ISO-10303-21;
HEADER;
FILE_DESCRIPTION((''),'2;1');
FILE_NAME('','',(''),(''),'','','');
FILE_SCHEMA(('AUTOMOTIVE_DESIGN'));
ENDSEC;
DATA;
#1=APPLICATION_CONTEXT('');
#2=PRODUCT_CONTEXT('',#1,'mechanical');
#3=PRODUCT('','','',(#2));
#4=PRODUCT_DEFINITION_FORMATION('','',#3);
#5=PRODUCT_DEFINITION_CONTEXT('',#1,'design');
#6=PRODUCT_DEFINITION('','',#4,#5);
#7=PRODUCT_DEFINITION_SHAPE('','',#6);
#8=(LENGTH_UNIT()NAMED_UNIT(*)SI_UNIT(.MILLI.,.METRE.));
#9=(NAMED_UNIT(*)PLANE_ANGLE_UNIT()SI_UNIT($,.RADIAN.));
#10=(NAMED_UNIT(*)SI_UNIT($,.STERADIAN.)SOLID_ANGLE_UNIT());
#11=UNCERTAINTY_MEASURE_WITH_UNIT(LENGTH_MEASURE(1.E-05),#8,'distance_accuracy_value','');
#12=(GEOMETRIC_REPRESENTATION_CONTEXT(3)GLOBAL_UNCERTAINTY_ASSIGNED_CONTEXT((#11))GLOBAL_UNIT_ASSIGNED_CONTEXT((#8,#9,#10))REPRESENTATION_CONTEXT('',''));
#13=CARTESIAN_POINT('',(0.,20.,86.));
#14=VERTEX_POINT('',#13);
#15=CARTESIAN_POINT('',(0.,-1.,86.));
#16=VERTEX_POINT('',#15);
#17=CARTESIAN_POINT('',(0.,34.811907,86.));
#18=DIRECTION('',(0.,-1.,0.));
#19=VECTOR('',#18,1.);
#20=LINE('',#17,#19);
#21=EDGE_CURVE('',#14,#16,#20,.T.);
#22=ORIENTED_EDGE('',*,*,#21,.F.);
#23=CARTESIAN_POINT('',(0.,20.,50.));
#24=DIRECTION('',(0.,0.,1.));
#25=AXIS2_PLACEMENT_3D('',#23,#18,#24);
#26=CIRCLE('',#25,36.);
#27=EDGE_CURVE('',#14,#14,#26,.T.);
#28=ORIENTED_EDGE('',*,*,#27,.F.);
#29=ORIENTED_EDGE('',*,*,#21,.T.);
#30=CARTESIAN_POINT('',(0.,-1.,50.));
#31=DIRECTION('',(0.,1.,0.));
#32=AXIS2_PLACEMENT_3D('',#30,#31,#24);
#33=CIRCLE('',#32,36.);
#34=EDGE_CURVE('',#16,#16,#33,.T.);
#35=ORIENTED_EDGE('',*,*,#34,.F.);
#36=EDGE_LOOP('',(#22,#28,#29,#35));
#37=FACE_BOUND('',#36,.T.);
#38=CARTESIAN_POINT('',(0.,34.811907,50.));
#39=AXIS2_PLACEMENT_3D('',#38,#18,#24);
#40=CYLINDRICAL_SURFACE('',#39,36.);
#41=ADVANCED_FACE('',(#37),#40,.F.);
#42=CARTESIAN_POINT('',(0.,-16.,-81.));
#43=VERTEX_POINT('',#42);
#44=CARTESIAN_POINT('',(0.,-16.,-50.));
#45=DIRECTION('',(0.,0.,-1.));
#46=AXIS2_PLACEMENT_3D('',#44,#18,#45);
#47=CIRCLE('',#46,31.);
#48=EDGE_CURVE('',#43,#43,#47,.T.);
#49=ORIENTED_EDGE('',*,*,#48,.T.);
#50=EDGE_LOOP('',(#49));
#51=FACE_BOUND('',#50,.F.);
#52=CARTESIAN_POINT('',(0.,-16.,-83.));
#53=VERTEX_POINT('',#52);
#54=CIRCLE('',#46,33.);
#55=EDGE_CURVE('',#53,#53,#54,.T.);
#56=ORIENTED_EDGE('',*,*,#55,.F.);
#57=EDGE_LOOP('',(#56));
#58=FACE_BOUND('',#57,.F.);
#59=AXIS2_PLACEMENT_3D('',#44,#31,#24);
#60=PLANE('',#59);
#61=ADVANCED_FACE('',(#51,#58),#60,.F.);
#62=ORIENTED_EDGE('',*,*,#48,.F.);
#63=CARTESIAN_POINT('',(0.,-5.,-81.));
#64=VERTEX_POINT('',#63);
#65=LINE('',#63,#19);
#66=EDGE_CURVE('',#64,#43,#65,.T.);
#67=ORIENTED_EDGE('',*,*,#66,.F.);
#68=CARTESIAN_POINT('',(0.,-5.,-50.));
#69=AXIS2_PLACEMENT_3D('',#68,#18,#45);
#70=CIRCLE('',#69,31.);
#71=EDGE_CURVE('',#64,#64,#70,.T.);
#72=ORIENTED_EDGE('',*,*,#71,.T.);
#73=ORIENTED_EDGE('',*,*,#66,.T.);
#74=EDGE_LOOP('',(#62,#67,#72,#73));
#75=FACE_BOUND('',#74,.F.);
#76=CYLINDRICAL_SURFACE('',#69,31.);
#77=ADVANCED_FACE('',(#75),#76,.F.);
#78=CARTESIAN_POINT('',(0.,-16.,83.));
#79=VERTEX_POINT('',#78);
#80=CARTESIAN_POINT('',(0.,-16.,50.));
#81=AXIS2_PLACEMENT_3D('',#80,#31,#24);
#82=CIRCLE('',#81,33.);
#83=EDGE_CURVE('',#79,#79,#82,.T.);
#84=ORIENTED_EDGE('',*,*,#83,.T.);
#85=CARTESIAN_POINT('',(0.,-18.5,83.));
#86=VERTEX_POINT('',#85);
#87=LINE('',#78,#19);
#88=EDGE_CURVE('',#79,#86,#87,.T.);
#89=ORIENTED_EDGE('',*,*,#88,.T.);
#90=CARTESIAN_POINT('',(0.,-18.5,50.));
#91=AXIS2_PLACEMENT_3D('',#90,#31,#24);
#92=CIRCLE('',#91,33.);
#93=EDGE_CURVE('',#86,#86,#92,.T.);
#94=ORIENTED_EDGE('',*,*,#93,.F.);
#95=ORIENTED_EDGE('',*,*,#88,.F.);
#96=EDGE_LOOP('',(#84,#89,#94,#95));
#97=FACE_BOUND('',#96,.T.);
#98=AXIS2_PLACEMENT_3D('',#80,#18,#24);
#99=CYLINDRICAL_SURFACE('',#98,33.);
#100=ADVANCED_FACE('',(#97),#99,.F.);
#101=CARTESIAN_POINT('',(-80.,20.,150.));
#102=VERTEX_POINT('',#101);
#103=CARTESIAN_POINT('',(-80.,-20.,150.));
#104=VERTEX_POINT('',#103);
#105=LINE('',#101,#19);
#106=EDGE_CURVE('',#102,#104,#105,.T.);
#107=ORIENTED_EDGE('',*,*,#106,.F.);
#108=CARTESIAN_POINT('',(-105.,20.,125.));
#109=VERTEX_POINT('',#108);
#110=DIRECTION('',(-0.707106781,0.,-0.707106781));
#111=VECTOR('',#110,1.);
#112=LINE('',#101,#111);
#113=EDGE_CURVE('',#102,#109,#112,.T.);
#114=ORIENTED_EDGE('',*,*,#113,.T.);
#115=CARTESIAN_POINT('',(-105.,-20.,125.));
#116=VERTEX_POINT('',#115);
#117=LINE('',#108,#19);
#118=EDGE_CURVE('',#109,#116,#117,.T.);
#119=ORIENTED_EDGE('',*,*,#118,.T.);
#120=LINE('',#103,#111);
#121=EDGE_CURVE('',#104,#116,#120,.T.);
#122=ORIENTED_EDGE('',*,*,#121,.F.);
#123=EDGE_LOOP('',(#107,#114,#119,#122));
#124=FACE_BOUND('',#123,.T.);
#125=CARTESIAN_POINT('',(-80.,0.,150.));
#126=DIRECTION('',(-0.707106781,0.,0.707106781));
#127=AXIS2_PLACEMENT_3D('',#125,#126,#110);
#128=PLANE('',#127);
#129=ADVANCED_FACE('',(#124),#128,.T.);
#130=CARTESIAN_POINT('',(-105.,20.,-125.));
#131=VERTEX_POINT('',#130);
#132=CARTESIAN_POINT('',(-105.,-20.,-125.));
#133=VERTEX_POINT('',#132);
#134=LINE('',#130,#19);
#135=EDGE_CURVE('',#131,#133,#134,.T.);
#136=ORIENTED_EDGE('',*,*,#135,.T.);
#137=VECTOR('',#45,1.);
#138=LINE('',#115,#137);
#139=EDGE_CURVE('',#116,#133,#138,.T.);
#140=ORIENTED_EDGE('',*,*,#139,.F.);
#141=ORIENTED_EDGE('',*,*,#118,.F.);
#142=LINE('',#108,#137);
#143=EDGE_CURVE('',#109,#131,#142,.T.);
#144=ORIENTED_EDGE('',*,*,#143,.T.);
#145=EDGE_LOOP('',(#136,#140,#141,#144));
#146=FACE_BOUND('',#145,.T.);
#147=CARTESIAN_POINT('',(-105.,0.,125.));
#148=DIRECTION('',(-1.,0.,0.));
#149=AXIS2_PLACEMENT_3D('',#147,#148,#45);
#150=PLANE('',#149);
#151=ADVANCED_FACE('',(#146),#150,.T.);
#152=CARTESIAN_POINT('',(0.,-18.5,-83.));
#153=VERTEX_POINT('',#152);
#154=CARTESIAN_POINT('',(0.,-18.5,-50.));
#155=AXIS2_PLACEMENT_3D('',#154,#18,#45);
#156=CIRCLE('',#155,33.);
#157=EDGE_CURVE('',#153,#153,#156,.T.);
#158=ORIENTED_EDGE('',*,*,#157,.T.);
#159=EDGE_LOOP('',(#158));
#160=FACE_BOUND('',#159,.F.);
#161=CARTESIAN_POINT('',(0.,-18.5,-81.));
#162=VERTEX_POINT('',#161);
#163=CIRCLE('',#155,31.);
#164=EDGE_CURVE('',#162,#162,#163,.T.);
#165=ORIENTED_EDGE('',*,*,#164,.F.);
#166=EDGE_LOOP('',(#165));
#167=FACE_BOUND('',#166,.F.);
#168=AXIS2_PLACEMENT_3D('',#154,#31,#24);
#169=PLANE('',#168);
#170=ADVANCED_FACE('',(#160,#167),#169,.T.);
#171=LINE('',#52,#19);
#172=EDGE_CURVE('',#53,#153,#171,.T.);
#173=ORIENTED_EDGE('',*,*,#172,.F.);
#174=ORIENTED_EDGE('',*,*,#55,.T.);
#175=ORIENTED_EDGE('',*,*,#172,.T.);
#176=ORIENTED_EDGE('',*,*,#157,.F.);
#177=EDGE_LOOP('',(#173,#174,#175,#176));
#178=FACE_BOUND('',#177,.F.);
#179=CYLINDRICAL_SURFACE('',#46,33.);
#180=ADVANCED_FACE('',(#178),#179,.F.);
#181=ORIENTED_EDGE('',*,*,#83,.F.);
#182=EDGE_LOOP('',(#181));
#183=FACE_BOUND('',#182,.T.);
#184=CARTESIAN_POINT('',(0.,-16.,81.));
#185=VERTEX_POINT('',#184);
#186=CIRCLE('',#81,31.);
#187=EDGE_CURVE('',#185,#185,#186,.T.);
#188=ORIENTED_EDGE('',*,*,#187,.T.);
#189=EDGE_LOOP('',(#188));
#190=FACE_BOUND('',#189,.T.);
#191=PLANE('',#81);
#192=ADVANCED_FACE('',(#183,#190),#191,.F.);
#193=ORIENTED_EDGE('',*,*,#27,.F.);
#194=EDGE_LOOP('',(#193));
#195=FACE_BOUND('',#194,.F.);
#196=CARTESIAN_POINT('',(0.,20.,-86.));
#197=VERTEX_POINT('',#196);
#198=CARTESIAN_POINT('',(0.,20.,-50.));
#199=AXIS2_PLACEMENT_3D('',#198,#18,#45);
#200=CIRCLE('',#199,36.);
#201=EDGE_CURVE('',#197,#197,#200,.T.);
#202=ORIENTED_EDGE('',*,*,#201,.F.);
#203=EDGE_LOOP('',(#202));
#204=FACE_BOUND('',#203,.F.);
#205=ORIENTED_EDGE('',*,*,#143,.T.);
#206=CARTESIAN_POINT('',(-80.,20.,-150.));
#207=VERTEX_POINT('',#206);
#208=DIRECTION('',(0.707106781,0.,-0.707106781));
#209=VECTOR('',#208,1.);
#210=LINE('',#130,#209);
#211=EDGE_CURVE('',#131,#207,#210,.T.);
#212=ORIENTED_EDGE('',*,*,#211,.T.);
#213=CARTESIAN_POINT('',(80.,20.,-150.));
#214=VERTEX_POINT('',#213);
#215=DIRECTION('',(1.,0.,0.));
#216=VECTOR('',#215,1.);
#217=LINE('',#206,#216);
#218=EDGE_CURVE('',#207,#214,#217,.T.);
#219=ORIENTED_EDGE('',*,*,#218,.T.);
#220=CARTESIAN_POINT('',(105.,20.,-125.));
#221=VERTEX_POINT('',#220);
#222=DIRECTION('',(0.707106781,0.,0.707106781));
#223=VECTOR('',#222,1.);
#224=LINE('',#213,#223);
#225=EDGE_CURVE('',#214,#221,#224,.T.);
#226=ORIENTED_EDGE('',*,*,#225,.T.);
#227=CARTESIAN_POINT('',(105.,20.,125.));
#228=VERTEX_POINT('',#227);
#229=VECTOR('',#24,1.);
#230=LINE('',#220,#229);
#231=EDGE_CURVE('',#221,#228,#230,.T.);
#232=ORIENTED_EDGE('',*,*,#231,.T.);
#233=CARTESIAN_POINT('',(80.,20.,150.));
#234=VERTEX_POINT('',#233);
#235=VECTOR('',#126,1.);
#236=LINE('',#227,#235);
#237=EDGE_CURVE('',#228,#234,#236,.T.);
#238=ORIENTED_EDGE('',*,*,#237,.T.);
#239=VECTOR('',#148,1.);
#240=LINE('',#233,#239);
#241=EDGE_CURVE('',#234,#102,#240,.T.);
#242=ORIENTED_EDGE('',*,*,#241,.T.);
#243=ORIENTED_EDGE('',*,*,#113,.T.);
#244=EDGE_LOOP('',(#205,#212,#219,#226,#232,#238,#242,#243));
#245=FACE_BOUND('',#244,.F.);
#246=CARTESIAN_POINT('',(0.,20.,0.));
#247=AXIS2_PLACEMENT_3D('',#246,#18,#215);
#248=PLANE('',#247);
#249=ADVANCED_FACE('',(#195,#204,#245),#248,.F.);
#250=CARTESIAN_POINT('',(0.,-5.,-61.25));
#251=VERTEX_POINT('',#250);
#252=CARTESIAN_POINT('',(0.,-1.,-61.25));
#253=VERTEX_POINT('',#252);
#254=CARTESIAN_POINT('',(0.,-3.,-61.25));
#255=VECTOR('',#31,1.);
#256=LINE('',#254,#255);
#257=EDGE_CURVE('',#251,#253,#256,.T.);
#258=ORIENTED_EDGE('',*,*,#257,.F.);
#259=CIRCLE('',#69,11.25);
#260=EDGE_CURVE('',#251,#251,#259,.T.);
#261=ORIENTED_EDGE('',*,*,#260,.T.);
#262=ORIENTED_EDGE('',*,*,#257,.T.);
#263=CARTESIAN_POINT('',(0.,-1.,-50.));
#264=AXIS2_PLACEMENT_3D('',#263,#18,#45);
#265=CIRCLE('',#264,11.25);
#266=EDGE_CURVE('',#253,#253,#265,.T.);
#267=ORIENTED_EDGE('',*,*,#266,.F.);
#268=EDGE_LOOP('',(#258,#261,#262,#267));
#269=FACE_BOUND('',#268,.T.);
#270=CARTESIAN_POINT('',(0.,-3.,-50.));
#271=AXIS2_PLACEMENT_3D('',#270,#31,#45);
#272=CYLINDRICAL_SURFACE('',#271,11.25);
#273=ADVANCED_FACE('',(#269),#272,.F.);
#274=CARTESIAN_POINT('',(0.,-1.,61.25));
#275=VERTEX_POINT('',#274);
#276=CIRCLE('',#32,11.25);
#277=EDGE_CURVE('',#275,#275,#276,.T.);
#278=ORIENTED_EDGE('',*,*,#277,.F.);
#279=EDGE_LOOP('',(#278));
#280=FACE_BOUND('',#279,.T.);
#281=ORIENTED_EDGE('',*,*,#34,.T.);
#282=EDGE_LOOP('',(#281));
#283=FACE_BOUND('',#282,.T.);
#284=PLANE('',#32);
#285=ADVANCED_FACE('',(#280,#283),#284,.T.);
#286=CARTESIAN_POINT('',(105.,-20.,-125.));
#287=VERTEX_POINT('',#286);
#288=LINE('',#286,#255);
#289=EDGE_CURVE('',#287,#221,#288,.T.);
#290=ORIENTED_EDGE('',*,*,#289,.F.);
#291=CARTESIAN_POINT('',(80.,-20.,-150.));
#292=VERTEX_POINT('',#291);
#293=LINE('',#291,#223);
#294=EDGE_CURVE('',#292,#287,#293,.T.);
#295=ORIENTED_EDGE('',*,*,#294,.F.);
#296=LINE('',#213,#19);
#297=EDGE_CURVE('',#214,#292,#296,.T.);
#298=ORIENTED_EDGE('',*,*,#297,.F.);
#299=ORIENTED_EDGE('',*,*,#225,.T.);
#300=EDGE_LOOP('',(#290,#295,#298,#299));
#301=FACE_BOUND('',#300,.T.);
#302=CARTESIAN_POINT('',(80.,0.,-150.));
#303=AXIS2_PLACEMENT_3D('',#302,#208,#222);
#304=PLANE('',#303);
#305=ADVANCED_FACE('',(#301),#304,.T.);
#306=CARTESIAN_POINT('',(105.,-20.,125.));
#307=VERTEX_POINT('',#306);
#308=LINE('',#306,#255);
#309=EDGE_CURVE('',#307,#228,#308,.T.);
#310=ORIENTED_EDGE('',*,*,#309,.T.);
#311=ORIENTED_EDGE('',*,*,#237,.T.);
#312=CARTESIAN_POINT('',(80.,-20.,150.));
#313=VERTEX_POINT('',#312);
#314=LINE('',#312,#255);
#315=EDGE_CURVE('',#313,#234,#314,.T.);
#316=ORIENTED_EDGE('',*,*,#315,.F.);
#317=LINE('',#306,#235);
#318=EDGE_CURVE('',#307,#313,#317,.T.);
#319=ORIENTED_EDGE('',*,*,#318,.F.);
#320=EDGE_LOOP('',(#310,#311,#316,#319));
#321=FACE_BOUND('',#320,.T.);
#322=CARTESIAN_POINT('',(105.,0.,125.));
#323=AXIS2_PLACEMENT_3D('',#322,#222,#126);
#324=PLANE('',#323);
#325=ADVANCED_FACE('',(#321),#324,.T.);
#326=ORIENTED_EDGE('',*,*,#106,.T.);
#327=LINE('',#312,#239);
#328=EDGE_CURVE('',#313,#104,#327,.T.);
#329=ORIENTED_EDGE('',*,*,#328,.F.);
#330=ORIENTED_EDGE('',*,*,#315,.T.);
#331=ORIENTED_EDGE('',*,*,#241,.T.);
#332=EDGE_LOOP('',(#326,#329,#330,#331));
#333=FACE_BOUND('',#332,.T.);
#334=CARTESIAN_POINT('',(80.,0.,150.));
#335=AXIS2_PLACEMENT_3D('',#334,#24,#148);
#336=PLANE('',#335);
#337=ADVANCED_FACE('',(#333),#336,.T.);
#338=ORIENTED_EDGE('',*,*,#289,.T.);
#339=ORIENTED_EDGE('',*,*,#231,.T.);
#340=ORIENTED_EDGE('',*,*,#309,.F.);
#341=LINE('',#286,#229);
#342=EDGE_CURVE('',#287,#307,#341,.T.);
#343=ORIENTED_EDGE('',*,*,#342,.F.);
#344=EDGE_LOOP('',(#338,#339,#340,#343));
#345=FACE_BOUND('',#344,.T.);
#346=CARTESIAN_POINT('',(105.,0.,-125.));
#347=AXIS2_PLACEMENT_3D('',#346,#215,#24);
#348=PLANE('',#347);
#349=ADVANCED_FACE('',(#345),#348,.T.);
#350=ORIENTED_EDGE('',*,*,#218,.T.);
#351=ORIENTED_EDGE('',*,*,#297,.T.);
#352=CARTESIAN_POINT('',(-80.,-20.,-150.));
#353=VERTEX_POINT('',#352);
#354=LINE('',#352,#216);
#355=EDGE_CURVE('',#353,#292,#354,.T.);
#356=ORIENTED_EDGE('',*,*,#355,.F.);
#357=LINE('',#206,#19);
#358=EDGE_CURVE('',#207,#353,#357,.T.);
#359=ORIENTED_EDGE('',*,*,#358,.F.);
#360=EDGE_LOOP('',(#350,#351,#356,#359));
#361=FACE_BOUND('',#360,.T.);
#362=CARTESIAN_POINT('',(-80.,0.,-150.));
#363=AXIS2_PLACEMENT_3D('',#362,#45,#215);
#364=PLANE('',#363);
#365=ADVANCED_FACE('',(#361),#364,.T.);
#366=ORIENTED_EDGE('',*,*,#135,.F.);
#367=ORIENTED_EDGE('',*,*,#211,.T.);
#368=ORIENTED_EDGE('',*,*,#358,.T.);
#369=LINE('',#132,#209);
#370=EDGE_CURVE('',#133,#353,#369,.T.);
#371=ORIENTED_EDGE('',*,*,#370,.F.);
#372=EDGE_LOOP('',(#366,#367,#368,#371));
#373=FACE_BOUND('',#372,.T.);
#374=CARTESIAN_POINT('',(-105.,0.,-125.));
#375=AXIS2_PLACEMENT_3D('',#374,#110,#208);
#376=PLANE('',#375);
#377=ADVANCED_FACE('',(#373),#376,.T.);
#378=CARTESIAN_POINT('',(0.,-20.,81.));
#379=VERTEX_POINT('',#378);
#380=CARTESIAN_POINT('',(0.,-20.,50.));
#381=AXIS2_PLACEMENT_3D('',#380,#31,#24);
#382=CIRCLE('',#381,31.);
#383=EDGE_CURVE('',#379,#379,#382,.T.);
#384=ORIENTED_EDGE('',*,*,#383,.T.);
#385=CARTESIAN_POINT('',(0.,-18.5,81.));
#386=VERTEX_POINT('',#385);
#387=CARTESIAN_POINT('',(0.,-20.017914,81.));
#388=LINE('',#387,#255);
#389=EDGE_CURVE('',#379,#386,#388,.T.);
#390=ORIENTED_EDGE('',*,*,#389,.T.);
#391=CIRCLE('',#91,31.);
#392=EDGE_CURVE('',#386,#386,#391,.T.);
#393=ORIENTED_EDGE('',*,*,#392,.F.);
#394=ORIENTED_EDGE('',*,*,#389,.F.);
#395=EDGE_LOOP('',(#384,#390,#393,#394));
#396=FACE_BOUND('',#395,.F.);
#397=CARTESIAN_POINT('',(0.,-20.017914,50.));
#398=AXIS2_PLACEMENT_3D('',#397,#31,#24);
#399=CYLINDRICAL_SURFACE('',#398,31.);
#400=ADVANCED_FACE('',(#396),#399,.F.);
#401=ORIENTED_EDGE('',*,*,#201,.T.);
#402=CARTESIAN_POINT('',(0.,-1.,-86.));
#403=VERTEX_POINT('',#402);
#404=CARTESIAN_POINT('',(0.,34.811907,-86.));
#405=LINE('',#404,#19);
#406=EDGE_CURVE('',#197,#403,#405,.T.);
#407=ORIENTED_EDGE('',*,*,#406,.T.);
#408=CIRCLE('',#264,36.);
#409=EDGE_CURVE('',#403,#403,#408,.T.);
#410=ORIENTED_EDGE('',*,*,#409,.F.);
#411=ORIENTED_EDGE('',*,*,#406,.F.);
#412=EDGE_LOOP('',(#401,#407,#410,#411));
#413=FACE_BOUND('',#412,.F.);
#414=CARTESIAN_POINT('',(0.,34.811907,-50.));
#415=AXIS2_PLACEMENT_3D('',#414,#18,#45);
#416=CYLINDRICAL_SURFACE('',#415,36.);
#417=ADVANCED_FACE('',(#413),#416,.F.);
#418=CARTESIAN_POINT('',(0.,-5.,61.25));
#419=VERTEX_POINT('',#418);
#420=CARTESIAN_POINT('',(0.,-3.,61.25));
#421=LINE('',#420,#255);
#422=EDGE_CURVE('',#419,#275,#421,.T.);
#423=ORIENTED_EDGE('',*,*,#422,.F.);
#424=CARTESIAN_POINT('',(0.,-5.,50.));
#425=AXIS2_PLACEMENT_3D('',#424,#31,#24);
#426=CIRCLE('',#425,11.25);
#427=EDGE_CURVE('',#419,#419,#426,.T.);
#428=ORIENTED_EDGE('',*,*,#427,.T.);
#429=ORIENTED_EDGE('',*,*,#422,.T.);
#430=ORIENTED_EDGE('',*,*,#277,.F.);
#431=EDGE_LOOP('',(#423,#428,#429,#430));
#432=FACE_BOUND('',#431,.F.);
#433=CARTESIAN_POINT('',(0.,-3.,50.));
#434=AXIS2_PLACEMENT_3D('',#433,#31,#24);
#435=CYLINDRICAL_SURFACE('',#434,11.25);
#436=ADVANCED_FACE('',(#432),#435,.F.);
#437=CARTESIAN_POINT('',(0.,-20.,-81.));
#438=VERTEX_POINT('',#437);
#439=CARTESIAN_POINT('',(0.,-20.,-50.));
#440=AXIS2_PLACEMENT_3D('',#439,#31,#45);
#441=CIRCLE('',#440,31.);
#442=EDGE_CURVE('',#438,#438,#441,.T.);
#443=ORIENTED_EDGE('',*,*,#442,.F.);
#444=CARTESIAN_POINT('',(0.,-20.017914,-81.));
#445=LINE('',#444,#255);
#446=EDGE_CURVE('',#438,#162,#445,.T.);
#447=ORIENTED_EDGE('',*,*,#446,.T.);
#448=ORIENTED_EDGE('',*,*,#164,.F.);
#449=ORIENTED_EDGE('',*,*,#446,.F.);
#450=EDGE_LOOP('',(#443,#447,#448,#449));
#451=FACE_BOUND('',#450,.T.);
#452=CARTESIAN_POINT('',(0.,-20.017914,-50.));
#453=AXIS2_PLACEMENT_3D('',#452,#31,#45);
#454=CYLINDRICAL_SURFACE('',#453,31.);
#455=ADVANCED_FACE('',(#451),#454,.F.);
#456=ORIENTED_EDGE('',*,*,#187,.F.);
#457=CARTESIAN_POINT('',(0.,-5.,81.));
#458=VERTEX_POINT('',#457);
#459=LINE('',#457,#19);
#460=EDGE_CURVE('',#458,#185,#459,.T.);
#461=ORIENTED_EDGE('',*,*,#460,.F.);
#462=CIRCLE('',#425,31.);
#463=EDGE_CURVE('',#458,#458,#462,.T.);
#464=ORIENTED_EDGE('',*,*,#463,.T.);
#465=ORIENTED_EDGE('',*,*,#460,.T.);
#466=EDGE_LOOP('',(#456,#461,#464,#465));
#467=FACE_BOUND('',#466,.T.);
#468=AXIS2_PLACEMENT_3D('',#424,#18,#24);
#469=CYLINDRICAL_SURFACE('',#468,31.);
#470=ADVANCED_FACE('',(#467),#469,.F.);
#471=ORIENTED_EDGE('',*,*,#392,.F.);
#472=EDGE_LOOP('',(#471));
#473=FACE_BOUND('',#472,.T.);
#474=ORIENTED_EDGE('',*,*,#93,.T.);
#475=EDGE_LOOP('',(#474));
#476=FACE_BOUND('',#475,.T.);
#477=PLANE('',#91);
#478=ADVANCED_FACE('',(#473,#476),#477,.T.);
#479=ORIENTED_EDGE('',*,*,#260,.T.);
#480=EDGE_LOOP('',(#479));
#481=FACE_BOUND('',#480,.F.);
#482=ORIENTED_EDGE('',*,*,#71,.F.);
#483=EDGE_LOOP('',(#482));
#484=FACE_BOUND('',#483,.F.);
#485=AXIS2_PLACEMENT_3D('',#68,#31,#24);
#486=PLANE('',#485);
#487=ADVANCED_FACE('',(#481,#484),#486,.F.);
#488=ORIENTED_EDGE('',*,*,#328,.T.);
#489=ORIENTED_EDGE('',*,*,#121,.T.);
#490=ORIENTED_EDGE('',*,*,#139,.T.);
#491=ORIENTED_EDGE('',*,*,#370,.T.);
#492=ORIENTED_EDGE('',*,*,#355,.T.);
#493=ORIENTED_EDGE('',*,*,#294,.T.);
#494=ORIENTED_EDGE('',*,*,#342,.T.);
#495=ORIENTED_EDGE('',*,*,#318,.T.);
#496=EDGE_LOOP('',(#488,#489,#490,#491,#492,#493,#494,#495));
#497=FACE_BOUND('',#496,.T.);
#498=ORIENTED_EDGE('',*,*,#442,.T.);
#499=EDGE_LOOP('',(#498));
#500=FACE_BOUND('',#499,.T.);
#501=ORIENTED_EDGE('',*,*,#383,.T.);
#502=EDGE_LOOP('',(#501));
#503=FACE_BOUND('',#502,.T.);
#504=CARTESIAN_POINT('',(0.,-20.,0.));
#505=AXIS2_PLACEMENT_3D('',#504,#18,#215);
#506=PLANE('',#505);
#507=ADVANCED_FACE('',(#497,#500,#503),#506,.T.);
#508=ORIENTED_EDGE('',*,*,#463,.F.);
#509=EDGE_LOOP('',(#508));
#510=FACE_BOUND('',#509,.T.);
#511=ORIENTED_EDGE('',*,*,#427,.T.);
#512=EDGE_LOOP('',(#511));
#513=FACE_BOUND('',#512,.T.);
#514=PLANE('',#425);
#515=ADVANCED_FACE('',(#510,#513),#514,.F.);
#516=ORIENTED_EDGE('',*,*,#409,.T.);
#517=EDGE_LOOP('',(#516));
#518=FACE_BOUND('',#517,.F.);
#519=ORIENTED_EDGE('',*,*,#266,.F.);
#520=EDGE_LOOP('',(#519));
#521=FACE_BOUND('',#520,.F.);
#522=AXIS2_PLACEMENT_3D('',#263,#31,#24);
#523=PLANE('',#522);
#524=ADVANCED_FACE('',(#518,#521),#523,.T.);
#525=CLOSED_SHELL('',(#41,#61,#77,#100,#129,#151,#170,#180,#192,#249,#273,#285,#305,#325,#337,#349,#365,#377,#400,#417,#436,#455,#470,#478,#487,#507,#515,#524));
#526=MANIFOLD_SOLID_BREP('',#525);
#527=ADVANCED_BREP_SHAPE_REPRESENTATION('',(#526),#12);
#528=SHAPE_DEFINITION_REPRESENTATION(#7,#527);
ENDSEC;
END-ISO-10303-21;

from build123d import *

# Parameters (mm, degrees)
F1_DEPTH = 20
F2_W     = 3.0358287096
F2_H     = 31
F2_W_2   = 4
F2_H_2   = 11.25


# Not quite as in the source:
# - a pattern or mirror of a feature is missing from the dataset's text; its kind, count and spacing are read off the source's solid


with BuildPart() as f1:
    # F0 (on Front) → F1 (new body, symmetric)
    with BuildSketch(Plane.XZ):
        Polygon((80, 150), (-80, 150), (-105, 125), (-105, -125), (-80, -150), (80, -150), (105, -125), (105, 125), align=None)
    extrude(amount=F1_DEPTH, both=True)

    # F2 (on Right) → F3 (revolve, cut)
    with BuildSketch(Plane.YZ):
        with Locations((-20.0179143548, 65.5)):
            Rectangle(F2_W, F2_H)
        Polygon((-18.5, 81), (-18.5, 50), (-16, 50), (-16, 81), (-16, 83), (-18.5, 83), align=None)
        Polygon((-16, 81), (-16, 50), (-5, 50), (-5, 61.25), (-5, 81), align=None)
        with Locations((-3, 55.625)):
            Rectangle(F2_W_2, F2_H_2)
        Polygon((-1, 61.25), (-1, 50), (34.8119065166, 50), (34.8119065166, 86), (-1, 86), align=None)
    f3 = revolve(axis=Axis((0, 5.6746993214, 50), (0, 1, 0)), mode=Mode.SUBTRACT)

    # F3_copies: F3 across plane
    add(f3.mirror(Plane(origin=(0, 0, 0), x_dir=(-1, 0, 0), z_dir=(0, 0, -1))), mode=Mode.SUBTRACT)


solid = f1.part
